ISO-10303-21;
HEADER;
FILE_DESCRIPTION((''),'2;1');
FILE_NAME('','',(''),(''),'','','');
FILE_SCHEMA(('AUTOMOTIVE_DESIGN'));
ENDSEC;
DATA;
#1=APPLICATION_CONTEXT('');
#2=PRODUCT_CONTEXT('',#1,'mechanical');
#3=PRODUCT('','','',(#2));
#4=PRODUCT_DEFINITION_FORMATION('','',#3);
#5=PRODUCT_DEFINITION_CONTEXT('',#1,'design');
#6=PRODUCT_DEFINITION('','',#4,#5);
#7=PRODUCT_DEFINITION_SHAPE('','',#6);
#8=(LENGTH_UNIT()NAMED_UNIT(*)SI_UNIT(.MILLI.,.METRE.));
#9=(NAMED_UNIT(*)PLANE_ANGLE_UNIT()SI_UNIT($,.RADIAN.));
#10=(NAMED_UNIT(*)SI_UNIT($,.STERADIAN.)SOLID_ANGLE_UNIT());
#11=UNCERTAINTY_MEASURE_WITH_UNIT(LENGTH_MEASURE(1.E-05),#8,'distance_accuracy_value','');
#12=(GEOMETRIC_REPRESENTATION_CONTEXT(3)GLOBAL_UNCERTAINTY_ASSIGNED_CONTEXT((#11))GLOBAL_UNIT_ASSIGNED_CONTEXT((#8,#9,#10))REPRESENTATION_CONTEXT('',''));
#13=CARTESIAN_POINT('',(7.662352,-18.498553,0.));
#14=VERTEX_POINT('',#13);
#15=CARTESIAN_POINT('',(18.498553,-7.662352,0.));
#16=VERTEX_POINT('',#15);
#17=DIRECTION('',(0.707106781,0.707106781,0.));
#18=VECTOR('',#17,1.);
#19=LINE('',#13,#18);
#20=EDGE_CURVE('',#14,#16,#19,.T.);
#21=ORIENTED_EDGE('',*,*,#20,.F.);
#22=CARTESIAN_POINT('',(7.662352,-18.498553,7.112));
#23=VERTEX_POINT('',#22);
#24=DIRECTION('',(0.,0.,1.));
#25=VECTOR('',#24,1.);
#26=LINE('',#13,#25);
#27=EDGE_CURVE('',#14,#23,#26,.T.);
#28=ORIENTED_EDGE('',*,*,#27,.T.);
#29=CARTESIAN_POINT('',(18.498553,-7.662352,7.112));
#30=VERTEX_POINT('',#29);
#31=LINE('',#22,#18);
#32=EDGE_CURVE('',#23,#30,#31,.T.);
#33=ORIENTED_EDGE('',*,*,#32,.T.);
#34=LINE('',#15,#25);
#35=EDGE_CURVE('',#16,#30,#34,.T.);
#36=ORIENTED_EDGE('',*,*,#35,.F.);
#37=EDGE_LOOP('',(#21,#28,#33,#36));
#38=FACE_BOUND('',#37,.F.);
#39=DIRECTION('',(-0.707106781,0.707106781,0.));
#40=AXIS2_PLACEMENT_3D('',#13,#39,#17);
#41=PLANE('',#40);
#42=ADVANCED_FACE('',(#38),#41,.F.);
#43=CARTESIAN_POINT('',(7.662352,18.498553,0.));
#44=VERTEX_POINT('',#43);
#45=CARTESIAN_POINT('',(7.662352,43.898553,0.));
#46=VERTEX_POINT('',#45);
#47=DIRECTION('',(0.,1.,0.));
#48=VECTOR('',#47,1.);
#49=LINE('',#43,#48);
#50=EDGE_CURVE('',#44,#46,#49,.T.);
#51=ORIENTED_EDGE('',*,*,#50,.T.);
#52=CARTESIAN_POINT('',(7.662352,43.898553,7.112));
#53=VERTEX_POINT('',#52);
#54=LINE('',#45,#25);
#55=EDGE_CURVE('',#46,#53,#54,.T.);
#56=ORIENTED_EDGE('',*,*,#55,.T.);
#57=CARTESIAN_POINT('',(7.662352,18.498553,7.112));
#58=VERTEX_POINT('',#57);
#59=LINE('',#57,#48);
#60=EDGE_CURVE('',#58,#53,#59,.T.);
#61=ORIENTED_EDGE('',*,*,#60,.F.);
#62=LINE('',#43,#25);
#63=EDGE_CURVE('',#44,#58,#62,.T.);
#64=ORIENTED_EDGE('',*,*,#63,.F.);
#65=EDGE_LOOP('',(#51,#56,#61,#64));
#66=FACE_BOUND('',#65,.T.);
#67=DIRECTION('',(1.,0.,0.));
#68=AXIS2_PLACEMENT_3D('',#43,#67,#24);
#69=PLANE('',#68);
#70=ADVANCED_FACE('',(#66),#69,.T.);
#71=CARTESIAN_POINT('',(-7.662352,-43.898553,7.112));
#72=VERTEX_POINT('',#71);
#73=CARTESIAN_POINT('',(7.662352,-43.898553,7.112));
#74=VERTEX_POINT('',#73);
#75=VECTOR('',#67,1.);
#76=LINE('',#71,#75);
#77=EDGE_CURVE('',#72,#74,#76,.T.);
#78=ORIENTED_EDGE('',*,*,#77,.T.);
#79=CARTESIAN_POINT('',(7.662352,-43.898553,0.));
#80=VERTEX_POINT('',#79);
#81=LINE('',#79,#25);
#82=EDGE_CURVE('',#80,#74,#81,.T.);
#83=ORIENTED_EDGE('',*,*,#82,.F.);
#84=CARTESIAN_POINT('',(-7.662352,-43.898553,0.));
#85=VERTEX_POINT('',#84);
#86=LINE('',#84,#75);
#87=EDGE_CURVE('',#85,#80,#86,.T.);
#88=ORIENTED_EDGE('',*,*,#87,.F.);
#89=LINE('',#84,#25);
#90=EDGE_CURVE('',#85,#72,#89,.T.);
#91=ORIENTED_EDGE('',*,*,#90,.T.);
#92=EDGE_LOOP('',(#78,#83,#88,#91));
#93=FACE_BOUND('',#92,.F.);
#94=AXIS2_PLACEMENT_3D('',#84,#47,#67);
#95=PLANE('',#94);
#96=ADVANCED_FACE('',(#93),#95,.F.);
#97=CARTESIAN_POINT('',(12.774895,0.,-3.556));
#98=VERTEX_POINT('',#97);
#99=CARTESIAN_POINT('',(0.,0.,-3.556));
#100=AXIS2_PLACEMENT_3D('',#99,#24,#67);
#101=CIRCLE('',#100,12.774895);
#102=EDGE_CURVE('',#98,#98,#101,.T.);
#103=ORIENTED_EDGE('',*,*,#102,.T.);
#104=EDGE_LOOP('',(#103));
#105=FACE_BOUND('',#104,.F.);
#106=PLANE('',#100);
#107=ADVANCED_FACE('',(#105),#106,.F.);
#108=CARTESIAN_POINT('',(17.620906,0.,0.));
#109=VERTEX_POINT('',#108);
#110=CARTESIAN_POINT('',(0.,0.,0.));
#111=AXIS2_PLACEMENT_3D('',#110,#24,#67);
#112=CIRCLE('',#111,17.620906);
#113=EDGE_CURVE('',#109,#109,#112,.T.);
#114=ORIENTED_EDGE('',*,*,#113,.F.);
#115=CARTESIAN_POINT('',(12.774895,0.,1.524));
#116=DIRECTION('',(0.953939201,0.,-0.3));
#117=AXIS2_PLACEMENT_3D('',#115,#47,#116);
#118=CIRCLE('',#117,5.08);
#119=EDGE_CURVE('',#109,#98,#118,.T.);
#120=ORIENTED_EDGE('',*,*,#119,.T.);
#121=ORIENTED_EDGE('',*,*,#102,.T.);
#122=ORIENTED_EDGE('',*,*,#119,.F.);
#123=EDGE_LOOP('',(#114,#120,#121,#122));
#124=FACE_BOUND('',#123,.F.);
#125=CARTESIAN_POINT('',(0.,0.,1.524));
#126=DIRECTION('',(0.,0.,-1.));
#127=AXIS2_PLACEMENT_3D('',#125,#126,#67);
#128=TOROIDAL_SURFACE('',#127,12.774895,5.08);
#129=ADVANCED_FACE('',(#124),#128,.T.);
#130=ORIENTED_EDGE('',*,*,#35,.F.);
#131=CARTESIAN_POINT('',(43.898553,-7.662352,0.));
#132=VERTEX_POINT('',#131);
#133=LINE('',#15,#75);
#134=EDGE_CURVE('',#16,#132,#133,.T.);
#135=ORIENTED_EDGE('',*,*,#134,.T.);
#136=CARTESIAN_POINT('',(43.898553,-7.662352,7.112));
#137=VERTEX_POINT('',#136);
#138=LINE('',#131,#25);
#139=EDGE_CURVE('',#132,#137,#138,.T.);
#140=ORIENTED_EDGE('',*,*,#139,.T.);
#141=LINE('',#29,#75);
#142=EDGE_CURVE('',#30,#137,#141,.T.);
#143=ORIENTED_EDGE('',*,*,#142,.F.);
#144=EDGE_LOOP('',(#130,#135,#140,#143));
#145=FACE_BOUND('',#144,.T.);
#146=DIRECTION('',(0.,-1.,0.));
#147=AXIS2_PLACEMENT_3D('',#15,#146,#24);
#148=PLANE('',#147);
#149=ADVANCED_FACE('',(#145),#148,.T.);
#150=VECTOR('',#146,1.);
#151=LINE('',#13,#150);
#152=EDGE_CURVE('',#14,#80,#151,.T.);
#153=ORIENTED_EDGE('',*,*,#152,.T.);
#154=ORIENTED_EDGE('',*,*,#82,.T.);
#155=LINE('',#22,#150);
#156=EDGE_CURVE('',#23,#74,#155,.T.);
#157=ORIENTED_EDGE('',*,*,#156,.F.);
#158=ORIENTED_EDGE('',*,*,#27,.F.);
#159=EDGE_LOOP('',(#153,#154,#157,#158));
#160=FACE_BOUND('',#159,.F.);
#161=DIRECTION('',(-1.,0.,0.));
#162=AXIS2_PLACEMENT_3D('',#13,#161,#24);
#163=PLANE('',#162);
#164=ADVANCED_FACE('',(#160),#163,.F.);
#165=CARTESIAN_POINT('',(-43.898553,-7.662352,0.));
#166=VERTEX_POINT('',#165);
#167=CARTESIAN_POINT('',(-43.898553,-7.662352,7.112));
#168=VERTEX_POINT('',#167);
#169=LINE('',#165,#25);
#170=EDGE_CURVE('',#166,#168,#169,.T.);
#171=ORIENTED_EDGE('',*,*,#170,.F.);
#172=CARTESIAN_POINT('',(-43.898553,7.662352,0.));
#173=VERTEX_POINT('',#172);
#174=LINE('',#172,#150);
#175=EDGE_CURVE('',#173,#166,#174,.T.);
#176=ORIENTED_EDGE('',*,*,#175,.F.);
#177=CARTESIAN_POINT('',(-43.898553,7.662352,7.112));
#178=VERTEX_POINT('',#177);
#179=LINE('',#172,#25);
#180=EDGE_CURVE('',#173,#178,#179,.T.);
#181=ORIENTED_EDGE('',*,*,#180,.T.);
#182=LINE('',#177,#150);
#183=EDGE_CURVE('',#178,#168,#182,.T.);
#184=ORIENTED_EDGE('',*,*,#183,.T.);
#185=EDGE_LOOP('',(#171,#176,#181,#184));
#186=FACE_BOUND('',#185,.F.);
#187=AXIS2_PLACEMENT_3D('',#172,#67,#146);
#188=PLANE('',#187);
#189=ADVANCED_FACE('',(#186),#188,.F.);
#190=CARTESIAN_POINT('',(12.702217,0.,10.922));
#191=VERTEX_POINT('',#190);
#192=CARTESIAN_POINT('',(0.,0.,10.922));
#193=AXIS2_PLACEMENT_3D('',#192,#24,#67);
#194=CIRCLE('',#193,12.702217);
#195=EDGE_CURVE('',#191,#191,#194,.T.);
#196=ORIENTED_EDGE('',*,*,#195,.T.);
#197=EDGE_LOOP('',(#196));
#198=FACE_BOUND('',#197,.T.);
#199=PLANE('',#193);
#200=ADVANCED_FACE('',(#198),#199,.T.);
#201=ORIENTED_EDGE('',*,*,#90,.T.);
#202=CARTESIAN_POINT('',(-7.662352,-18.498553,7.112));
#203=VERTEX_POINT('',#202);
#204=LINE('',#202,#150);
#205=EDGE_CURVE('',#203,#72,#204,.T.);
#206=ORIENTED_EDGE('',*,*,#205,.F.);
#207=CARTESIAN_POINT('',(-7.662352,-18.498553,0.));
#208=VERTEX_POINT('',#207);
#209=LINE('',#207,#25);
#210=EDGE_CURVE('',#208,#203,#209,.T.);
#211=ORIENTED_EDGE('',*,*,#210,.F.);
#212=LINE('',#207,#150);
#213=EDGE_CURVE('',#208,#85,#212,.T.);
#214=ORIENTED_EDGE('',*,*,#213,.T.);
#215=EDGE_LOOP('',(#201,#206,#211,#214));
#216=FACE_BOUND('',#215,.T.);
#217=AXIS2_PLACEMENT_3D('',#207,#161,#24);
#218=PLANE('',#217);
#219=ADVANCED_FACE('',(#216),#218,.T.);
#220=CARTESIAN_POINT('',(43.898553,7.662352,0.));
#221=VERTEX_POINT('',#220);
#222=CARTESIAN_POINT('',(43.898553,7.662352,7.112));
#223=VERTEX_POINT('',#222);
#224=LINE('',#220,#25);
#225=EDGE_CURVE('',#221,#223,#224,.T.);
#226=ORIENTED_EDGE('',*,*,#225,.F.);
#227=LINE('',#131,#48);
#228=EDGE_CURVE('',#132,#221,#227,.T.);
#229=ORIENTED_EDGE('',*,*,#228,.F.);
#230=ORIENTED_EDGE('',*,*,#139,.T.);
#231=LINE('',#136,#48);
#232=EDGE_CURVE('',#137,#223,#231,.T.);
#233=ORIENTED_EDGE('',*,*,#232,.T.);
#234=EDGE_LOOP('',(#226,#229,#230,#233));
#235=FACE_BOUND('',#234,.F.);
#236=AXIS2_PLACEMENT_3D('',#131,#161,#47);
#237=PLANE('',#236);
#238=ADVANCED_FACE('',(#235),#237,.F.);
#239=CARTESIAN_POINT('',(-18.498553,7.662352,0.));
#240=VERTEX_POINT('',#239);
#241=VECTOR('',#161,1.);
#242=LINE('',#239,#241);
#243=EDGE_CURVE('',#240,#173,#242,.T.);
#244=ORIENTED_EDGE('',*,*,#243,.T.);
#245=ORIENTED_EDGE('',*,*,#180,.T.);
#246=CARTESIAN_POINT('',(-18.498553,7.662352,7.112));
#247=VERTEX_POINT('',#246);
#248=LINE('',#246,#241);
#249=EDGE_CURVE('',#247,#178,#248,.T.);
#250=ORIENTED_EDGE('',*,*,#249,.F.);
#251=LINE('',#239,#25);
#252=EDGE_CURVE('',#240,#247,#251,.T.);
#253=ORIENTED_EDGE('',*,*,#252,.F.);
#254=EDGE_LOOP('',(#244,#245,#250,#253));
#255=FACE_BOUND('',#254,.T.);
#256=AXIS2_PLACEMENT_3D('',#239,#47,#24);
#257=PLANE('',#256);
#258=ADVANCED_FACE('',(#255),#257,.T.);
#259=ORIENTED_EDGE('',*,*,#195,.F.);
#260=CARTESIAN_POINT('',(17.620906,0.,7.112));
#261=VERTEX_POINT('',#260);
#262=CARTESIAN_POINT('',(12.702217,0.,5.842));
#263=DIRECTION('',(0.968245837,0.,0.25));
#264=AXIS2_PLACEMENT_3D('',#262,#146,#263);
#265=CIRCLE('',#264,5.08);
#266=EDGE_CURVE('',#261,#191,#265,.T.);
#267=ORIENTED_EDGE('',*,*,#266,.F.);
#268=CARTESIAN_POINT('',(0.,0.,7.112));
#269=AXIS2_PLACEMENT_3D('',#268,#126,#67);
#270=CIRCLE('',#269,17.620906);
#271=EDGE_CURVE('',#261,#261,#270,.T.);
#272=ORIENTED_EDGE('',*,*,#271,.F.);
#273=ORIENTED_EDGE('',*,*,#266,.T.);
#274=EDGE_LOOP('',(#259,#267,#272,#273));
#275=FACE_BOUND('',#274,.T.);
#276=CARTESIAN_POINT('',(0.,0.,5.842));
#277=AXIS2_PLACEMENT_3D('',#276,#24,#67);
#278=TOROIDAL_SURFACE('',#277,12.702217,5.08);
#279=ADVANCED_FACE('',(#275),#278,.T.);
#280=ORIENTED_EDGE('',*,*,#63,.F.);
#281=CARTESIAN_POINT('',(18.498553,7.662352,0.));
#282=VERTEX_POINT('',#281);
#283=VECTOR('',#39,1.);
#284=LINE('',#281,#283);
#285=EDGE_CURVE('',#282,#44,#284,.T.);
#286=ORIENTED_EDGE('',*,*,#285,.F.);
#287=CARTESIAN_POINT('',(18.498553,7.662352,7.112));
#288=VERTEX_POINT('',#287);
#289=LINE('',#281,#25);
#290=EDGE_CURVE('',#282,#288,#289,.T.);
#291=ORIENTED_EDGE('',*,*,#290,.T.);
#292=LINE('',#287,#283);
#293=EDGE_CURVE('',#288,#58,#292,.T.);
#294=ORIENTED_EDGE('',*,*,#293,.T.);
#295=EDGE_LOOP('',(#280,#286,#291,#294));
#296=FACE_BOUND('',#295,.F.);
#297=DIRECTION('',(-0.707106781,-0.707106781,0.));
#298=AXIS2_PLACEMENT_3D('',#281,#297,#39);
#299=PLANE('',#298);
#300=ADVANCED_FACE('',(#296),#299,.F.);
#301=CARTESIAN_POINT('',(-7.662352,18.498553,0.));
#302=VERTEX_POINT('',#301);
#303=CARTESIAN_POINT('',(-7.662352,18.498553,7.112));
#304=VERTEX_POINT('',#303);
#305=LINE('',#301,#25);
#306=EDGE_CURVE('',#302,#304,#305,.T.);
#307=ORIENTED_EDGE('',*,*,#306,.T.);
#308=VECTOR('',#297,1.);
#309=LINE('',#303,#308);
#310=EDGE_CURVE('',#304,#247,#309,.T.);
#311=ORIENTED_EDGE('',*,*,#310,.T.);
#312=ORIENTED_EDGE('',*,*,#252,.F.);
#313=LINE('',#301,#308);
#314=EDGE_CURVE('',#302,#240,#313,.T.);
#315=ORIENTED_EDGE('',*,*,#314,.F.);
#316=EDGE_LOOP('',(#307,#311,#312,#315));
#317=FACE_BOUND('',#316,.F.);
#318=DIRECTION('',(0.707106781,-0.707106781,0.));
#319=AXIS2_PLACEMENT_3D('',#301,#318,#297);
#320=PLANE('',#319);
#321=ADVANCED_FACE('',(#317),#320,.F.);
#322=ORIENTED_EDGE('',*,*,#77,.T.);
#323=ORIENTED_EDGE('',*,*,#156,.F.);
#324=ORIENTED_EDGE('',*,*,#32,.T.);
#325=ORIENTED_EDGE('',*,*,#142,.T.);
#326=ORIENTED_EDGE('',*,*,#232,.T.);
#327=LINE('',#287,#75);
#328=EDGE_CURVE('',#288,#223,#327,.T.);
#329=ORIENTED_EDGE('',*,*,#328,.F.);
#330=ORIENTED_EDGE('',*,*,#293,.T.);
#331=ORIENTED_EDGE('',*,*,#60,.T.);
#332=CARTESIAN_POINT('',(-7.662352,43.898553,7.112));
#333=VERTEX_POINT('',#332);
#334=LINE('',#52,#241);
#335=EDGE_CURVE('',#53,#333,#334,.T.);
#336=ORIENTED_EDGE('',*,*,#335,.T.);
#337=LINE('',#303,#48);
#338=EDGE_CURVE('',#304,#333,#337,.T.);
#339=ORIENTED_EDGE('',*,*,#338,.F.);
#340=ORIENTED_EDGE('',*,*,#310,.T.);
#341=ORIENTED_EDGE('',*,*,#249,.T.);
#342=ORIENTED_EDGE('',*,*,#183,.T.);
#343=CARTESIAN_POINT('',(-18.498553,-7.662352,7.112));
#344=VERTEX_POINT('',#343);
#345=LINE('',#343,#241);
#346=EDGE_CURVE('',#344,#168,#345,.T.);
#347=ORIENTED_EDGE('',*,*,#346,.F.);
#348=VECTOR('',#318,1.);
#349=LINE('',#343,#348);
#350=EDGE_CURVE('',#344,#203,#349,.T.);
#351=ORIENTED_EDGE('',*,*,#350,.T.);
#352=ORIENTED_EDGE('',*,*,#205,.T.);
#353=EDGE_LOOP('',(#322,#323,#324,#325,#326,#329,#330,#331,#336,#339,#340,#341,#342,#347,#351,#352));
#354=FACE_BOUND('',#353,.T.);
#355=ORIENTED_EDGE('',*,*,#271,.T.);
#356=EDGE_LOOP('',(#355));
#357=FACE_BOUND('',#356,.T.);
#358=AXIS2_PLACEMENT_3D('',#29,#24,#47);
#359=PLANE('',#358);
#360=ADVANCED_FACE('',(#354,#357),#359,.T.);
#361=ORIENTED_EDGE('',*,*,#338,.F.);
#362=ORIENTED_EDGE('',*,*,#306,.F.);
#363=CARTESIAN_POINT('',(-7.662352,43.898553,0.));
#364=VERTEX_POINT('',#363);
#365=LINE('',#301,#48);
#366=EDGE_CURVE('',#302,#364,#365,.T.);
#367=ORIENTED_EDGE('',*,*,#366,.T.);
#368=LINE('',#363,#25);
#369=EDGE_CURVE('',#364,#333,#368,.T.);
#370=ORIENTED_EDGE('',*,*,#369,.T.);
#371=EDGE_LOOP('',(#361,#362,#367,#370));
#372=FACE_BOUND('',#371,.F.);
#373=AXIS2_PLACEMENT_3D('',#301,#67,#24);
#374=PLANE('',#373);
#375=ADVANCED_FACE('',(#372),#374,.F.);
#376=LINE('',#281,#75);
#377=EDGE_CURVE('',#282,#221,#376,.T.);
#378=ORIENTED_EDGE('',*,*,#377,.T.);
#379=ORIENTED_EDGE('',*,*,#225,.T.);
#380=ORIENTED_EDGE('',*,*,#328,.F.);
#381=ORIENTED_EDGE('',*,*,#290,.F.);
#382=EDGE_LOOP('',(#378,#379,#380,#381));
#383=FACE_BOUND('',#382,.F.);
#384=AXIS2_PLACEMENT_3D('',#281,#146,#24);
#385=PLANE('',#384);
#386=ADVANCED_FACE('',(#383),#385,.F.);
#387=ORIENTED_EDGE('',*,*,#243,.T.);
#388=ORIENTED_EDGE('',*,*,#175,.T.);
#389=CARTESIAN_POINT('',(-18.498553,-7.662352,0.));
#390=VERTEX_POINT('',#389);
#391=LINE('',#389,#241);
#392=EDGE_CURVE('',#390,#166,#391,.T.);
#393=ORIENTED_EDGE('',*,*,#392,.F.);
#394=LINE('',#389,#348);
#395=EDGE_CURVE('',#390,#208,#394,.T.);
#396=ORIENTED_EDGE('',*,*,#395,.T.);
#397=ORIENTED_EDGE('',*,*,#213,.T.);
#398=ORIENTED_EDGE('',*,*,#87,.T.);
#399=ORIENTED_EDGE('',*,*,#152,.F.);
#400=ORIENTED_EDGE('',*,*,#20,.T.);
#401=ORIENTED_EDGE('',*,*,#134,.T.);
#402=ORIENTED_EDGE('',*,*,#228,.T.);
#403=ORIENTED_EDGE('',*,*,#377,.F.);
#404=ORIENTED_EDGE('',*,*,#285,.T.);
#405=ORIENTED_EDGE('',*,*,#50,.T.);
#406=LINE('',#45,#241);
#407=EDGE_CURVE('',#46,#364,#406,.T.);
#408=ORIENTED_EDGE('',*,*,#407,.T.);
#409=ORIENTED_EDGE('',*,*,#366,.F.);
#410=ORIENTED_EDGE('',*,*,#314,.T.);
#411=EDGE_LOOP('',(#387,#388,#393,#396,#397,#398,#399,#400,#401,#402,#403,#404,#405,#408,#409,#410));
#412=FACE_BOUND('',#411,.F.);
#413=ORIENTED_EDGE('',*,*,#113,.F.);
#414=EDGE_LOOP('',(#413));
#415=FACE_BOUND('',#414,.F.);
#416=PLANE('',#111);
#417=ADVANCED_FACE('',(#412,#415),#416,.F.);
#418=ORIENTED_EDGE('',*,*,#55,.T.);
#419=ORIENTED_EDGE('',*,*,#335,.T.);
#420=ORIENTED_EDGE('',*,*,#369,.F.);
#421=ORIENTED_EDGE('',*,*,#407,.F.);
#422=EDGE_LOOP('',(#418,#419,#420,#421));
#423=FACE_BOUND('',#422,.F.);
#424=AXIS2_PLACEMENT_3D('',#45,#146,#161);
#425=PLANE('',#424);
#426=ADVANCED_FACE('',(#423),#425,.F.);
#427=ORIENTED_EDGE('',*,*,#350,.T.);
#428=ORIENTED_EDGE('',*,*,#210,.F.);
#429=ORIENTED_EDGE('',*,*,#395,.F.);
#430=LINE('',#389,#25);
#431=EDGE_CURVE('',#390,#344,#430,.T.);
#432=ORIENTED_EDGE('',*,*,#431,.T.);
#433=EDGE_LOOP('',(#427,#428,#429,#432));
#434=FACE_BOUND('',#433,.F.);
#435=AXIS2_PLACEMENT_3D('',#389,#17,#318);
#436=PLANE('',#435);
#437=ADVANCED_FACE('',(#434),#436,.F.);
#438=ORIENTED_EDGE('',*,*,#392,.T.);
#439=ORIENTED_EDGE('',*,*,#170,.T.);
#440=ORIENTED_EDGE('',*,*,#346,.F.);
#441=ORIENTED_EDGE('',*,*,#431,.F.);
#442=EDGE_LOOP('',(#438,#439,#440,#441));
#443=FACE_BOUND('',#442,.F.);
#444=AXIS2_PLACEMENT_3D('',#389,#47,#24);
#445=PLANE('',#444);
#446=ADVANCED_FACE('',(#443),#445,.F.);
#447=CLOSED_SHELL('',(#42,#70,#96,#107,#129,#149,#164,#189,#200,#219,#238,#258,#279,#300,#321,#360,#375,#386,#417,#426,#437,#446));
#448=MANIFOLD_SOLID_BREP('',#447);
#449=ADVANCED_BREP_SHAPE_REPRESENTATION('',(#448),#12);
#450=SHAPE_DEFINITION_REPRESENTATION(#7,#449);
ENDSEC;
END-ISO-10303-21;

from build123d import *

# Parameters (mm, degrees)
F1_DEPTH = 7.112
F2_DEPTH = 25.4
F3_DEPTH = 25.4
F4_DEPTH = 25.4
F5_DEPTH = 25.4
F6_R     = 17.6209063201
F7_DEPTH = 10.922
F8_DEPTH = 3.556


# Not quite as in the source:
# - a fillet or chamfer that OpenCascade refuses, or shapes differently, is made with other operations: its cross-section is extruded or revolved along the edge and cut away or added


with BuildPart() as f1:
    # F0 (on Top) → F1 (new body)
    with BuildSketch(Plane.XY):
        Polygon((7.6623515216, 18.4985529631), (-7.6623515216, 18.4985529631), (-18.4985529631, 7.6623515216), (-18.4985529631, -7.6623515216), (-7.6623515216, -18.4985529631), (7.6623515216, -18.4985529631), (18.4985529631, -7.6623515216), (18.4985529631, 7.6623515216), align=None)
    extrude(amount=F1_DEPTH)

    # F2 (add): a face of the model
    f2_faces = [f1.faces().sort_by_distance(p)[0] for p in [
        (0, -18.4985529631, 3.556),
    ]]
    extrude(f2_faces, amount=F2_DEPTH)

    # F3 (add): a face of the model
    f3_faces = [f1.faces().sort_by_distance(p)[0] for p in [
        (-18.4985529631, 0, 3.556),
    ]]
    extrude(f3_faces, amount=F3_DEPTH)

    # F4 (add): a face of the model
    f4_faces = [f1.faces().sort_by_distance(p)[0] for p in [
        (0, 18.4985529631, 3.556),
    ]]
    extrude(f4_faces, amount=F4_DEPTH)

    # F5 (add): a face of the model
    f5_faces = [f1.faces().sort_by_distance(p)[0] for p in [
        (18.4985529631, 0, 3.556),
    ]]
    extrude(f5_faces, amount=F5_DEPTH)

    # F6 (on Top) → F7 (join)
    with BuildSketch(Plane.XY):
        Circle(F6_R)
    extrude(amount=F7_DEPTH)

    # F6 (on Top) → F8 (join)
    with BuildSketch(Plane.XY):
        Circle(F6_R)
    extrude(amount=-F8_DEPTH)

    # F9: fillet of radius 5.08 on 1 edges, made by hand

    # F9_s1 → F9_t2 (revolve, cut)
    with BuildSketch(Plane.XZ):
        with BuildLine():
            ThreePointArc((17.6209063201, 7.112), (15.8130694437, 9.8580926284), (12.7022174704, 10.922))
            Line((12.7022174704, 10.922), (17.6209063201, 10.922))
            Line((17.6209063201, 10.922), (17.6209063201, 7.112))
        make_face()
    revolve(axis=Axis((0, 0, 10.922), (0, 0, 1)), mode=Mode.SUBTRACT)

    # F10: fillet of radius 5.08 on 1 edges, made by hand

    # F10_s1 → F10_t2 (revolve, cut)
    with BuildSketch(Plane.XZ):
        with BuildLine():
            ThreePointArc((17.6209063201, 0), (15.7802637067, -2.5716269361), (12.7748951769, -3.556))
            Line((12.7748951769, -3.556), (17.6209063201, -3.556))
            Line((17.6209063201, -3.556), (17.6209063201, 0))
        make_face()
    revolve(axis=Axis((0, 0, -3.556), (0, 0, 1)), mode=Mode.SUBTRACT)


solid = f1.part
